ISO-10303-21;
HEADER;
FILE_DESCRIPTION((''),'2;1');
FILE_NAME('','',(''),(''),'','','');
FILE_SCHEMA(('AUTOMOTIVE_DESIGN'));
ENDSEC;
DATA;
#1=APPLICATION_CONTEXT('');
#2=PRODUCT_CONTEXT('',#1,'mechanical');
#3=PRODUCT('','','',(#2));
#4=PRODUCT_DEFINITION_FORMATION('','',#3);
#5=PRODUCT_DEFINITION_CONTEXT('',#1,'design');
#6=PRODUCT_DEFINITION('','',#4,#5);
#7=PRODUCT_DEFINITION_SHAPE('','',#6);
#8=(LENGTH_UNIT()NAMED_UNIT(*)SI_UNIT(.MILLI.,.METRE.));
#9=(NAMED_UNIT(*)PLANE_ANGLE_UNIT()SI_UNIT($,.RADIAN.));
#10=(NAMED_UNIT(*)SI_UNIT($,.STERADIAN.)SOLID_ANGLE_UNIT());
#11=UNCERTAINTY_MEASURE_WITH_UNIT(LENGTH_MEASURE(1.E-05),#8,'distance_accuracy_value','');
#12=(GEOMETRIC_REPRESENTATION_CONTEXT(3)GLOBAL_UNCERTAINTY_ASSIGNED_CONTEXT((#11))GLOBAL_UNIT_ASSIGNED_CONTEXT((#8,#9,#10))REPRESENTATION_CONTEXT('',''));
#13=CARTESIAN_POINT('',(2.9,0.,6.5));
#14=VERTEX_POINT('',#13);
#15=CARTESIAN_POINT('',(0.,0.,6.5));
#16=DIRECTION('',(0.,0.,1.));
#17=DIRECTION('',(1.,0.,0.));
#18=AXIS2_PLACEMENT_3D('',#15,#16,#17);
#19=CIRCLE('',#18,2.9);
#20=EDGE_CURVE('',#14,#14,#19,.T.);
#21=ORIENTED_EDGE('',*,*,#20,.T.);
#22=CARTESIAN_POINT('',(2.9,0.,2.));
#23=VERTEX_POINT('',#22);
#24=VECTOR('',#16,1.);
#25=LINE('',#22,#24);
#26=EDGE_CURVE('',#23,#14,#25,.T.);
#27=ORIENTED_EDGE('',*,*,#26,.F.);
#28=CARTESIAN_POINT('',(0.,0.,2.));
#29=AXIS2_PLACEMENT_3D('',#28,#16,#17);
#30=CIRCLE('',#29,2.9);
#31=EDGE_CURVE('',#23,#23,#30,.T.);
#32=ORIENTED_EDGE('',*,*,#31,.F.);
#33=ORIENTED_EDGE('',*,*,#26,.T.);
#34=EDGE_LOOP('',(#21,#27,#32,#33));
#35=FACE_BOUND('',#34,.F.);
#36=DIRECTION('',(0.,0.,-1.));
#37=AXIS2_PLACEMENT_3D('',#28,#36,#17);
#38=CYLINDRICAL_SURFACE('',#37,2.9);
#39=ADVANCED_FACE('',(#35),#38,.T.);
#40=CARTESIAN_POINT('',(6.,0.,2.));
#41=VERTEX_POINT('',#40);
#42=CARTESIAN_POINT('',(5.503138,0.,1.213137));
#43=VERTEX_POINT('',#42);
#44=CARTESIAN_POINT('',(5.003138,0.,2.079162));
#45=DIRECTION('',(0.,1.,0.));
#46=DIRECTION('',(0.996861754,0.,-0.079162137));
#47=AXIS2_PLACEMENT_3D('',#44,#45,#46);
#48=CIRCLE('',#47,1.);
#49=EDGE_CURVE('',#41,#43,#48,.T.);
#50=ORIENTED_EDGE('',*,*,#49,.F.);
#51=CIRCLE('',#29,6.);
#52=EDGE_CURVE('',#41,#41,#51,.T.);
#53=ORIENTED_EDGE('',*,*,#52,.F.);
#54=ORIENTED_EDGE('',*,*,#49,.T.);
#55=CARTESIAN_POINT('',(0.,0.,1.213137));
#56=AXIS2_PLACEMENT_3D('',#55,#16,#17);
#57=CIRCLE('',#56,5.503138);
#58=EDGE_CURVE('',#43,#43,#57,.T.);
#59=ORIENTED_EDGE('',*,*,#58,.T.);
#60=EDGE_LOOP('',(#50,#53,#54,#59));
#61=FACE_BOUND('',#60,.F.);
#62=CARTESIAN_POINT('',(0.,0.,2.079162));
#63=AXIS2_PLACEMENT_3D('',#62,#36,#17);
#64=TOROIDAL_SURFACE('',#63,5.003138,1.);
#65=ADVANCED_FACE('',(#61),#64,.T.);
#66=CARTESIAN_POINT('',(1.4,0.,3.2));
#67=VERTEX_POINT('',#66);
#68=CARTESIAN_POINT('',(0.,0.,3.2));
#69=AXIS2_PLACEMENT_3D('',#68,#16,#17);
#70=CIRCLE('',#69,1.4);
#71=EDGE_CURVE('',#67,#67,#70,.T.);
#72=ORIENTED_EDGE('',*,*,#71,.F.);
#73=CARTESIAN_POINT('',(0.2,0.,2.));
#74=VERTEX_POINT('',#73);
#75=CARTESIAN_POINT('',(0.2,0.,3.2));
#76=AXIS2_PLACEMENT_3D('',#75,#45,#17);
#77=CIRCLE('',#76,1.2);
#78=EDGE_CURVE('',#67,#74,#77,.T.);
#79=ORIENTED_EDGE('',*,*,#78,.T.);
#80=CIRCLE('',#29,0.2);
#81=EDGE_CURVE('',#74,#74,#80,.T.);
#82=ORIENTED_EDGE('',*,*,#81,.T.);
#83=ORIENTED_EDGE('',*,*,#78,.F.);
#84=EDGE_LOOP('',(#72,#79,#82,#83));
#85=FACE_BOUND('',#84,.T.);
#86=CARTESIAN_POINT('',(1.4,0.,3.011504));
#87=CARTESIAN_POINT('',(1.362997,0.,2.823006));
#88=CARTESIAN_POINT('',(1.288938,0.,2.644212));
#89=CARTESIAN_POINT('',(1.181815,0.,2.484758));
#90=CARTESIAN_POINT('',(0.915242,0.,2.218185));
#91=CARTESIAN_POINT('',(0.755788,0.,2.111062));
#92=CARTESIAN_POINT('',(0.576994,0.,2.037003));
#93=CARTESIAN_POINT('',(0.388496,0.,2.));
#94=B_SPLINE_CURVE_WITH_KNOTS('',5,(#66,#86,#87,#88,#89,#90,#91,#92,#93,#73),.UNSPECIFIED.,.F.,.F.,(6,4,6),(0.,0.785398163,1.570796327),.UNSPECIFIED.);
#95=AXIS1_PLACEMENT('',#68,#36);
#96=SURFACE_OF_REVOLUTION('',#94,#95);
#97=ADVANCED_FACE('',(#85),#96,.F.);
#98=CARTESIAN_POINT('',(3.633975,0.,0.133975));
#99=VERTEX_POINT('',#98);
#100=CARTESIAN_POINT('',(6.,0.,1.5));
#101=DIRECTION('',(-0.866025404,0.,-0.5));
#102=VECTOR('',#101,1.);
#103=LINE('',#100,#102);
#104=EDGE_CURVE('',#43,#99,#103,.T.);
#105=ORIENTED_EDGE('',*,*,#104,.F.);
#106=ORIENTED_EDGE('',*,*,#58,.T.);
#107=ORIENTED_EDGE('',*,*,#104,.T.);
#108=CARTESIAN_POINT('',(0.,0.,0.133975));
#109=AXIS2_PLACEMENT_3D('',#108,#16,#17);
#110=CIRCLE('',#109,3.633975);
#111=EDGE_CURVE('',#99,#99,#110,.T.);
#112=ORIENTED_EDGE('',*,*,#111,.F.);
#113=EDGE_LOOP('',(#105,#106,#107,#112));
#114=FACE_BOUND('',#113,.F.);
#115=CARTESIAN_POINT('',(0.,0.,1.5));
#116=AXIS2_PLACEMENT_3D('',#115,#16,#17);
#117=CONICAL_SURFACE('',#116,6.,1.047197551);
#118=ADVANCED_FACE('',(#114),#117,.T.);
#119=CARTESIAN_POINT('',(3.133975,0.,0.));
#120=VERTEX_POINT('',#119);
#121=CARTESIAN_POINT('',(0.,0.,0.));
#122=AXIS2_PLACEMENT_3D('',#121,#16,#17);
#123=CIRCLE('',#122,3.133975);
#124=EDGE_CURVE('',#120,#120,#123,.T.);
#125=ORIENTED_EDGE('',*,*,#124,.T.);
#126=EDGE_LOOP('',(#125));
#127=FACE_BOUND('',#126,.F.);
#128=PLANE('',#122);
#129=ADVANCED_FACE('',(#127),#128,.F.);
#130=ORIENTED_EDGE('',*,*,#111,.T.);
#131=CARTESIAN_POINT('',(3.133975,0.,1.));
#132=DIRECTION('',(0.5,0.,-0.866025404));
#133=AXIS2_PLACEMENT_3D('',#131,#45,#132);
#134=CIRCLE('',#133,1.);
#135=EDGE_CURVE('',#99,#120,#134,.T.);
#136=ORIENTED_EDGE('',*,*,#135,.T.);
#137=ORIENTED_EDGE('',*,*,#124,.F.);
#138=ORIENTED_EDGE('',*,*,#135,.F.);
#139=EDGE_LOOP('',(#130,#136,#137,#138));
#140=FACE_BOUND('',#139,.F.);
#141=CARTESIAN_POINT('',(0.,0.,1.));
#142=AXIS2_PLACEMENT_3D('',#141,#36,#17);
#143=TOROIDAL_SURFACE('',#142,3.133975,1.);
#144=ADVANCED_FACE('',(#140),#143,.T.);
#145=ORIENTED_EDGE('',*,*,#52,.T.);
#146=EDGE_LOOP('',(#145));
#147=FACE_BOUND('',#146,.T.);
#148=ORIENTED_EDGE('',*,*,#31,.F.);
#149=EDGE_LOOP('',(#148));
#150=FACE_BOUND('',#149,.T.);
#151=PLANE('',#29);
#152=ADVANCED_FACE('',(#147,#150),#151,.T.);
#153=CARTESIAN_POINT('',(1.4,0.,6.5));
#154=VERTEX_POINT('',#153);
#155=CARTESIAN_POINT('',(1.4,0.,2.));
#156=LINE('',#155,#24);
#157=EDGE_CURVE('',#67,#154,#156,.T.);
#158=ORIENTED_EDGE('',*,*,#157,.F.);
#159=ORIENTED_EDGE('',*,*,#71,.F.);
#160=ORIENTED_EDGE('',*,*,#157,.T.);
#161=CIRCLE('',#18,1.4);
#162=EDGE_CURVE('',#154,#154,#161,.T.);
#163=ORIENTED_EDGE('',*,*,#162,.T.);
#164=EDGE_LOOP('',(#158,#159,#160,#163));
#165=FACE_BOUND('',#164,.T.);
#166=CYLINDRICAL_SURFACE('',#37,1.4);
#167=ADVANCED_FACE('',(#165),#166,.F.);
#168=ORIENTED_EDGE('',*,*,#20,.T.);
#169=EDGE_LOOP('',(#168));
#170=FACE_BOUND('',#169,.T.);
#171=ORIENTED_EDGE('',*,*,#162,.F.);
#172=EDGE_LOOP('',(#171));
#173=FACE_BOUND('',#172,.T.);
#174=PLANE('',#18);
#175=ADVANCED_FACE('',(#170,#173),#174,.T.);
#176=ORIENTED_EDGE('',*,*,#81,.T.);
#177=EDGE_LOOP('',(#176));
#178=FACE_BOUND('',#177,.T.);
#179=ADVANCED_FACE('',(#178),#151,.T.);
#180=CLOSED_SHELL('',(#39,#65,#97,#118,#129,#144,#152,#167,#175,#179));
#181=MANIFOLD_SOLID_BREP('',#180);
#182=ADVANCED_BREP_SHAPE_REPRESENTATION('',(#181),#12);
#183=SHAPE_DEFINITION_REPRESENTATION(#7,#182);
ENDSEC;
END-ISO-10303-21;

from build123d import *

# Parameters (mm, degrees)
F0_R     = 6
F1_DEPTH = 2
F2_SIZE2 = 2.5980762114
F2_SIZE  = 1.5
F4_R     = 2.9
F4_R_2   = 1.4
F5_DEPTH = 4.5
F6_R     = 1.2


# Not quite as in the source:
# - a fillet or chamfer that OpenCascade refuses, or shapes differently, is made with other operations: its cross-section is extruded or revolved along the edge and cut away or added


with BuildPart() as f1:
    # F0 (on Top) → F1 (new body)
    with BuildSketch(Plane.XY):
        Circle(F0_R)
    extrude(amount=F1_DEPTH)

    # F2
    f2_edges = [f1.edges().sort_by_distance(p)[0] for p in [
        (-6, 0, 0),
    ]]
    f2_side = f1.faces().sort_by_distance((-6, 0, 1))[0]
    chamfer(f2_edges, length=F2_SIZE, length2=F2_SIZE2, reference=f2_side)

    # F3: fillet of radius 1 on 2 edges, made by hand

    # F3_s1 → F3_t2 (revolve, cut)
    with BuildSketch(Plane.XZ):
        with BuildLine():
            ThreePointArc((3.6339745962, 0.1339745962), (3.3927936413, 0.0340741737), (3.1339745962, 0))
            Line((3.1339745962, 0), (3.4019237886, 0))
            Line((3.4019237886, 0), (3.6339745962, 0.1339745962))
        make_face()
    revolve(axis=Axis((0, 0, 0), (0, 0, 1)), mode=Mode.SUBTRACT)

    # F3_s3 → F3_t4 (revolve, cut)
    with BuildSketch(Plane.XZ):
        with BuildLine():
            ThreePointArc((6, 2), (5.8486778537, 1.5452494356), (5.5031382462, 1.2131367327))
            Line((5.5031382462, 1.2131367327), (6, 1.5))
            Line((6, 1.5), (6, 2))
        make_face()
    revolve(axis=Axis((0, 0, 1.5), (0, 0, 1)), mode=Mode.SUBTRACT)

    # F4 (on face) → F5 (join)
    with BuildSketch(Plane.XY.offset(2)):
        Circle(F4_R)
        Circle(F4_R_2, mode=Mode.SUBTRACT)
    extrude(amount=F5_DEPTH)

    # F6
    f6_edges = [f1.edges().sort_by_distance(p)[0] for p in [
        (-1.4, 0, 2),
    ]]
    fillet(f6_edges, radius=F6_R)


solid = f1.part
